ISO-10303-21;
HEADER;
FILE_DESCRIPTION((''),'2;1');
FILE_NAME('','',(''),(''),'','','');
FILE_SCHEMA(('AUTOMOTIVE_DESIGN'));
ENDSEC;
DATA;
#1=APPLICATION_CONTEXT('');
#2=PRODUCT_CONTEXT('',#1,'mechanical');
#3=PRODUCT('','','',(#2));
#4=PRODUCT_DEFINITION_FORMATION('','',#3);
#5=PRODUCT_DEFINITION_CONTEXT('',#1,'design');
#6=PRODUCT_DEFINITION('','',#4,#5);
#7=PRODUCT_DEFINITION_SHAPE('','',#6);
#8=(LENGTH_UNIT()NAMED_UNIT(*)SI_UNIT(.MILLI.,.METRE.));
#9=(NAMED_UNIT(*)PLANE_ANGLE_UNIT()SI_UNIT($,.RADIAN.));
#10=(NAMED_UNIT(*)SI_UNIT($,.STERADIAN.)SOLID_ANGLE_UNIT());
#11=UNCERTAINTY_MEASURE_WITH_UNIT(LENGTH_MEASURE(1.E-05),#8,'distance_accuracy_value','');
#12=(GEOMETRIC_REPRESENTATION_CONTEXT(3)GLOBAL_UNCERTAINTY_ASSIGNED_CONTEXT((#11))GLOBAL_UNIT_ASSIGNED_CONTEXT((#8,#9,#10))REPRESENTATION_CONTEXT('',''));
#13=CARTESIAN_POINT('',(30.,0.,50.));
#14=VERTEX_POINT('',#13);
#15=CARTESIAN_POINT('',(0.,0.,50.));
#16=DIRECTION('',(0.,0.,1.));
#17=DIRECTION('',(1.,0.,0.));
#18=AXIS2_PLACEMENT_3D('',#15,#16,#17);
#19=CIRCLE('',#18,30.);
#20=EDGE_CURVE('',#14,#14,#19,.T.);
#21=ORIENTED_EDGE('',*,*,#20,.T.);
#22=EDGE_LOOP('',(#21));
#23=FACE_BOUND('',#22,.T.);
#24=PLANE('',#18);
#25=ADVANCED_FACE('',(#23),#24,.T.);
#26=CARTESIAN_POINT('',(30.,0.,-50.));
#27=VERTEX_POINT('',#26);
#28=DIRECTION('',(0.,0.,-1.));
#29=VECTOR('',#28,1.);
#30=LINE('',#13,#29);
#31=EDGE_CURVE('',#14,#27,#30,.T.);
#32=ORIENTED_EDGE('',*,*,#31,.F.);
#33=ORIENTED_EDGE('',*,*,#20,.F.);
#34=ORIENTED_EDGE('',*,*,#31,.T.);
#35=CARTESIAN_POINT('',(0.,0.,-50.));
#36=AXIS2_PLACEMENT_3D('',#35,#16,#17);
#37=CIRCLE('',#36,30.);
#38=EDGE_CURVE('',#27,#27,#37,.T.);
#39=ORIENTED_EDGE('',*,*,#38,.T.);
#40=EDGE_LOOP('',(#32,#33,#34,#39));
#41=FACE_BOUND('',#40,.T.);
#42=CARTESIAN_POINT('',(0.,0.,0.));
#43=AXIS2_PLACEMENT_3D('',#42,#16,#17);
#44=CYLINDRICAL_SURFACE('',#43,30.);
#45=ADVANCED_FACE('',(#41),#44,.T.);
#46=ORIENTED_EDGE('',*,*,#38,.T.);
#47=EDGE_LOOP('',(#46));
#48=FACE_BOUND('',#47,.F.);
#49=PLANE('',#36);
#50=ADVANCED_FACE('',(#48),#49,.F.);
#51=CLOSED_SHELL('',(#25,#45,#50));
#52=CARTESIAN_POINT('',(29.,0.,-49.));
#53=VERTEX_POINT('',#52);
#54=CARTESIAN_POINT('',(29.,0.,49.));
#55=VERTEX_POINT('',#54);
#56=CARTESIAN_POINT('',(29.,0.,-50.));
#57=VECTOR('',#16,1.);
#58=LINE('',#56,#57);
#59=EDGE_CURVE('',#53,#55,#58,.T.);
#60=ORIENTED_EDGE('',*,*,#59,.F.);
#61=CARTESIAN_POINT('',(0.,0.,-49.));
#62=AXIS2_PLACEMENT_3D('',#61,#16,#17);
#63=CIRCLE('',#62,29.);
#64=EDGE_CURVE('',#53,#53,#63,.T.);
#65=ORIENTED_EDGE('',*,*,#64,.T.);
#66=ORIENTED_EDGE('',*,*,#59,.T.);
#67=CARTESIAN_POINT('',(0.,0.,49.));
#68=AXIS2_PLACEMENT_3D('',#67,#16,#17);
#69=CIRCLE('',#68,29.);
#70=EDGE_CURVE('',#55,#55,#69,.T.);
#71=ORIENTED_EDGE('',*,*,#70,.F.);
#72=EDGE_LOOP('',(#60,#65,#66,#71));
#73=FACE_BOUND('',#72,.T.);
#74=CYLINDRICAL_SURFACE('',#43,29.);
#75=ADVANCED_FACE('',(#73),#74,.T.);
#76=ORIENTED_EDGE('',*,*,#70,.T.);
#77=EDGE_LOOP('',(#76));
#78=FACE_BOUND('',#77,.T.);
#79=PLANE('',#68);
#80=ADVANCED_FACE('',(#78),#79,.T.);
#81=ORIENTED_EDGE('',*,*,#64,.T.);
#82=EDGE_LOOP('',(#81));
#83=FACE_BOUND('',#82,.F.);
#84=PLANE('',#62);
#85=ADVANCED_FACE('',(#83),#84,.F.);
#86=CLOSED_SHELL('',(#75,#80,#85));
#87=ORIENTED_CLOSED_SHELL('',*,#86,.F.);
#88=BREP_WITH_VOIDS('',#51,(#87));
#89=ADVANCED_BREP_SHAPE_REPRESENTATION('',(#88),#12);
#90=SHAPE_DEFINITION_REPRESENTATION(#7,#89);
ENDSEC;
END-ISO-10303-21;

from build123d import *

# Parameters (mm, degrees)
F0_R     = 30
F1_DEPTH = 50
F2_T     = -1
F3_R     = 30
F4_DEPTH = 1


with BuildPart() as f1:
    # F0 (on Top) → F1 (new body, symmetric)
    with BuildSketch(Plane.XY):
        Circle(F0_R)
    extrude(amount=F1_DEPTH, both=True)

    # F2
    f2_openings = [f1.faces().sort_by_distance(p)[0] for p in [
        (0, 0, 50),
    ]]
    offset(amount=F2_T, openings=f2_openings)

    # F3 (on face) → F4 (join)
    with BuildSketch(Plane.XY.offset(50)):
        Circle(F3_R)
    extrude(amount=-F4_DEPTH)


solid = f1.part
